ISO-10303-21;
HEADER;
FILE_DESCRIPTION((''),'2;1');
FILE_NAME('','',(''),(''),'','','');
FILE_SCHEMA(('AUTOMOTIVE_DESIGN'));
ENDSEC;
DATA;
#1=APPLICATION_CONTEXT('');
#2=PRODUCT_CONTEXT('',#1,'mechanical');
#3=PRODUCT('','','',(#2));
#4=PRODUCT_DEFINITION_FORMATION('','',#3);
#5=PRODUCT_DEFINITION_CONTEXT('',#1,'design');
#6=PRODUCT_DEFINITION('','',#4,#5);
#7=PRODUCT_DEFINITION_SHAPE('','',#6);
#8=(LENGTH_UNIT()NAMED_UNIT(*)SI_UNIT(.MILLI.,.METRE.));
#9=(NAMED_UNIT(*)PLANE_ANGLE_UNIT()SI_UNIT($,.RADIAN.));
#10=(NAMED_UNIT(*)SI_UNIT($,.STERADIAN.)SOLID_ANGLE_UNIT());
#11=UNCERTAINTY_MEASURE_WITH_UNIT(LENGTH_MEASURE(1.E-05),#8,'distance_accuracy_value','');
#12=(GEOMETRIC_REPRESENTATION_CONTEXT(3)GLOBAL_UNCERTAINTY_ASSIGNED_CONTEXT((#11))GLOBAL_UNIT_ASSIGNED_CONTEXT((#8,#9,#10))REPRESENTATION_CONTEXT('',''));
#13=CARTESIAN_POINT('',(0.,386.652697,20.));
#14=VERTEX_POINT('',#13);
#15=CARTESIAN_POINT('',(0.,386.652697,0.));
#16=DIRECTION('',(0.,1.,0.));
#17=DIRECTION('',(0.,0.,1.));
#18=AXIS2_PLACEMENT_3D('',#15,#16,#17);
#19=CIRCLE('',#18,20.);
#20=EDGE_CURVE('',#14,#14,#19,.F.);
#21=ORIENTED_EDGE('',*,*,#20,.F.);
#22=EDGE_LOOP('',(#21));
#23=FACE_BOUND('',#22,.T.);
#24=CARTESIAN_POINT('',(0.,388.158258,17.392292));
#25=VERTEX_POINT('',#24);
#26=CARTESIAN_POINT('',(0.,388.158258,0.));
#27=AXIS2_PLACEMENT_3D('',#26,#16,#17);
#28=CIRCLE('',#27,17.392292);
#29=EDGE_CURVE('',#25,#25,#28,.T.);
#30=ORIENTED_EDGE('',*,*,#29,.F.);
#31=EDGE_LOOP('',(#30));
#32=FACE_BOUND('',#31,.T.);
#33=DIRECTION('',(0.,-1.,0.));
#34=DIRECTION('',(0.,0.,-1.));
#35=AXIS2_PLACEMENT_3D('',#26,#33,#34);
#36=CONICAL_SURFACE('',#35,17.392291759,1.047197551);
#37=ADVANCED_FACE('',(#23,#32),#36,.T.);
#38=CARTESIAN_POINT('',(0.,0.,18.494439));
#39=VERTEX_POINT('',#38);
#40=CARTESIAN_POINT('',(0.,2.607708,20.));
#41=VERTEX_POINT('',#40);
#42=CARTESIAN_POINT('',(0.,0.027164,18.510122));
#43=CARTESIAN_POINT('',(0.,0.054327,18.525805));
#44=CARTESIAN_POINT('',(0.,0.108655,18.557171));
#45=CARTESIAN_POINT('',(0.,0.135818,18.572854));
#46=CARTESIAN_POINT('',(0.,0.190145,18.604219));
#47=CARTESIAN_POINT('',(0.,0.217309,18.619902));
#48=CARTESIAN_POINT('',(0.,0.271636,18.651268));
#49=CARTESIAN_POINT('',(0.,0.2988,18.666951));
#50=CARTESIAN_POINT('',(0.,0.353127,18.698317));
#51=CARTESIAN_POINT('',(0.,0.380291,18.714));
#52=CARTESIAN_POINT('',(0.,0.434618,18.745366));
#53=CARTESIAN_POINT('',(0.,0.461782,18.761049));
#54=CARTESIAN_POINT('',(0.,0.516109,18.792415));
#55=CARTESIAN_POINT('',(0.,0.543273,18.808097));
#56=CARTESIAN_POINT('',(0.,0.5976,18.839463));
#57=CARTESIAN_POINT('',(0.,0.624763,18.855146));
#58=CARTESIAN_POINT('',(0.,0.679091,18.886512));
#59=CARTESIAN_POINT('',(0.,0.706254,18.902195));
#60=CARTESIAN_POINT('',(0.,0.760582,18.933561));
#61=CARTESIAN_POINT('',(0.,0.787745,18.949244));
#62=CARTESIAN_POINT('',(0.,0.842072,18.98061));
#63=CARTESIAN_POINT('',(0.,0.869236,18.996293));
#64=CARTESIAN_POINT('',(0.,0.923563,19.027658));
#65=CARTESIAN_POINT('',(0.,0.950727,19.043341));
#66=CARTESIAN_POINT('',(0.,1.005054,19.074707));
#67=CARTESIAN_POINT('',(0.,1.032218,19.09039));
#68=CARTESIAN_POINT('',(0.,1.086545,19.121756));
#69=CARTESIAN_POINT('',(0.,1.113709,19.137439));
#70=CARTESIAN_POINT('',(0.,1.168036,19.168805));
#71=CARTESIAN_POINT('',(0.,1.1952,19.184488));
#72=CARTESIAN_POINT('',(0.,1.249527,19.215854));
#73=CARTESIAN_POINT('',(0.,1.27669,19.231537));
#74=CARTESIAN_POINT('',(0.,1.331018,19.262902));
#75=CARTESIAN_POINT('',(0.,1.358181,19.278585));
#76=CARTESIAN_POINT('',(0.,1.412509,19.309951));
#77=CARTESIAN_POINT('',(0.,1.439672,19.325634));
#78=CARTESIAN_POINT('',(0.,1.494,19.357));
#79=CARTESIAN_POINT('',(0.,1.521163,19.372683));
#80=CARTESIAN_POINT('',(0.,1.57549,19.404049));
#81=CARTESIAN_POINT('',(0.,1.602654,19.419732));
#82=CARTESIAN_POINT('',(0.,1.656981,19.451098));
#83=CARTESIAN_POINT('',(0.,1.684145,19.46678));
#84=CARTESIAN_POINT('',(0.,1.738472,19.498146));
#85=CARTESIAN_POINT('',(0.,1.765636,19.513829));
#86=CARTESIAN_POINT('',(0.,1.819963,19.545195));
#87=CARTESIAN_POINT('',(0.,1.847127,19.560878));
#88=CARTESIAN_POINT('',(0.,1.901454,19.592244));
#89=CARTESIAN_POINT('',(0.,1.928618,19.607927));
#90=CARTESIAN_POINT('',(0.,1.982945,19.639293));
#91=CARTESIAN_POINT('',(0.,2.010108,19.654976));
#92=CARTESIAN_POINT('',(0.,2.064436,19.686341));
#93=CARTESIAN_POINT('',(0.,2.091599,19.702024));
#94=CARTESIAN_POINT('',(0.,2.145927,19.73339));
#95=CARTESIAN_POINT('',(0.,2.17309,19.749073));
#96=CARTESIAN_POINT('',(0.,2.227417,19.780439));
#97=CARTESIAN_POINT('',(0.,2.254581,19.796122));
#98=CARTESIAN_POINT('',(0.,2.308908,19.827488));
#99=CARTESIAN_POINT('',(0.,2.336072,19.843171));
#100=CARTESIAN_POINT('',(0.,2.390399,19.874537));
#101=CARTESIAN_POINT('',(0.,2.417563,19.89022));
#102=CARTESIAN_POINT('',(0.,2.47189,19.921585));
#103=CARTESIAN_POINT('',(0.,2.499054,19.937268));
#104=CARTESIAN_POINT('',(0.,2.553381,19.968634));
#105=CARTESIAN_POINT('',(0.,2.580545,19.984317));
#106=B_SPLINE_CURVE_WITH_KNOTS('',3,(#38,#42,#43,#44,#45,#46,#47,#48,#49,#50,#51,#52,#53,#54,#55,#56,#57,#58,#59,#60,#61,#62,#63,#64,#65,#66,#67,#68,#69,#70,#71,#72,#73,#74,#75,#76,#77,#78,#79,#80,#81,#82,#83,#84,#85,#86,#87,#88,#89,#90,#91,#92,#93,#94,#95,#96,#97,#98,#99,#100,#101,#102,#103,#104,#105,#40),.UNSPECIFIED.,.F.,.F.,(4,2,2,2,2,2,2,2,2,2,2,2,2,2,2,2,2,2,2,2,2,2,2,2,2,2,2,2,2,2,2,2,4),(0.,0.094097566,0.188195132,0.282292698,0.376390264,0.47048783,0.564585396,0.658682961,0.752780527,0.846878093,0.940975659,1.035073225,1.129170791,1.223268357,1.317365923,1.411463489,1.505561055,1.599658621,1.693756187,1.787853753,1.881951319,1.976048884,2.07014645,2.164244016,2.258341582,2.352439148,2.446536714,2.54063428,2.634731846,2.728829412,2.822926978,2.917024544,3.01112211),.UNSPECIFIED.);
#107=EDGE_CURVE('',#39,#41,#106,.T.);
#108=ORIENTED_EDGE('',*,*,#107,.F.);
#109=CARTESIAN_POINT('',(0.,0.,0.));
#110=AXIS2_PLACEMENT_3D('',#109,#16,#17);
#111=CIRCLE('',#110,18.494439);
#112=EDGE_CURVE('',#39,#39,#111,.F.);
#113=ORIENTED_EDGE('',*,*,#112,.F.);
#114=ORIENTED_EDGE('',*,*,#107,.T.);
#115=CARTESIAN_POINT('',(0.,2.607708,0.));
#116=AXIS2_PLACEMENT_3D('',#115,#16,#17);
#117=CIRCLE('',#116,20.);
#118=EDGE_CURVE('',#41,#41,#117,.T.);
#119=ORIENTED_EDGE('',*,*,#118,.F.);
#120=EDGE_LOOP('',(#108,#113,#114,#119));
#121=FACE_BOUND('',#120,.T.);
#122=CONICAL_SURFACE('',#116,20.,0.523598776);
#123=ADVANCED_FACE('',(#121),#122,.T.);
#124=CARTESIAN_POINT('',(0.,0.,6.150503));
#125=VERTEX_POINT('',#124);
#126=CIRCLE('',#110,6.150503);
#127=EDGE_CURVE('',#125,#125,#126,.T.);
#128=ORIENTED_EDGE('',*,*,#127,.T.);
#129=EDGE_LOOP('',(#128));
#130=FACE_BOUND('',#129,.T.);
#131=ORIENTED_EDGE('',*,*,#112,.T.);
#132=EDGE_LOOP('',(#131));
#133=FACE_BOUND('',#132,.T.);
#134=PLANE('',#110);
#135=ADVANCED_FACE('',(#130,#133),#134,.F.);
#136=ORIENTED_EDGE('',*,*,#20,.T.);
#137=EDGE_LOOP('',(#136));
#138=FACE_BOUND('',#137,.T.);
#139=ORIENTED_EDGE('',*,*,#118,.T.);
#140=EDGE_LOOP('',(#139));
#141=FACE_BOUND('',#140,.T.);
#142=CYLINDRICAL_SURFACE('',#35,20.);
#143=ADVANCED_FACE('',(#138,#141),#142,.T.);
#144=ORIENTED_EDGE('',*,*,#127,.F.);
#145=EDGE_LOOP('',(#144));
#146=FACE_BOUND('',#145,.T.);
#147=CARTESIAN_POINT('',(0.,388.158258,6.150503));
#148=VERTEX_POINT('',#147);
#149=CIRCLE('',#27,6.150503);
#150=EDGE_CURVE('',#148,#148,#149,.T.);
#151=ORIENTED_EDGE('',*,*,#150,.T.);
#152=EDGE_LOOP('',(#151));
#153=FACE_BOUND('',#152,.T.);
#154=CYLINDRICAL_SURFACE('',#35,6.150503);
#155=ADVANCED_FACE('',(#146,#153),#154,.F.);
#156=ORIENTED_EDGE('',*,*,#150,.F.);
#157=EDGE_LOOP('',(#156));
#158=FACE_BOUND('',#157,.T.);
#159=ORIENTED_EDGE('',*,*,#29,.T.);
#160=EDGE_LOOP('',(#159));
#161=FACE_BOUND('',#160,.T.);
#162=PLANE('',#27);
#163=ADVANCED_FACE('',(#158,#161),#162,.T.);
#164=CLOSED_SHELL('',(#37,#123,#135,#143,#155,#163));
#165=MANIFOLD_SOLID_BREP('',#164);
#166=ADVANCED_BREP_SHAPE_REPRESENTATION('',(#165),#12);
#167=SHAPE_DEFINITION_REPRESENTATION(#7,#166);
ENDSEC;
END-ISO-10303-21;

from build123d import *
from OCP.BRepFilletAPI import BRepFilletAPI_MakeChamfer

# Parameters (mm, degrees)
SKETCH1_R           = 20
BOSS_EXTRUDE1_DEPTH = 388.158257928
SKETCH2_R           = 6.150503184
CUT_EXTRUDE1_DEPTH  = 390.187401129
CHAMFER1_SIZE       = 1.505561055
CHAMFER1_SIZE2      = 2.607708241


with BuildPart() as part:
    # Sketch1 → Boss-Extrude1 (new body)
    with BuildSketch(Plane(origin=(0, 0, 0), x_dir=(1, 0, 0), z_dir=(0, 1, 0))):
        Circle(SKETCH1_R)
    extrude(amount=BOSS_EXTRUDE1_DEPTH)

    # Sketch2 → Cut-Extrude1 (cut, through all)
    with BuildSketch(Plane(origin=(0, 0, 0), x_dir=(1, 0, 0), z_dir=(0, 1, 0))):
        Circle(SKETCH2_R)
    extrude(amount=CUT_EXTRUDE1_DEPTH, mode=Mode.SUBTRACT)

    # Chamfer1: one chamfer whose edges measure the first distance from different faces: ONE call of the kernel's chamfer builder (chamfer() names one face for all edges)
    chamfer1_edges_1 = [part.edges().sort_by_distance(p)[0] for p in [
        (-20, 388.158257928, 0),
    ]]
    chamfer1_side_1 = [part.faces().sort_by_distance(p)[0] for p in [
        (-20, 194.079128964, 0),
    ]]
    chamfer1_edges_2 = [part.edges().sort_by_distance(p)[0] for p in [
        (-20, 0, 0),
    ]]
    chamfer1_side_2 = [part.faces().sort_by_distance(p)[0] for p in [
        (-19.434314575, 0, 0),
    ]]
    chamfer1 = BRepFilletAPI_MakeChamfer(part.part.solid().wrapped)
    for e in chamfer1_edges_1:
        chamfer1.Add(CHAMFER1_SIZE, CHAMFER1_SIZE2, e.wrapped, chamfer1_side_1[0].wrapped)  # the first distance lies on this face
    for e in chamfer1_edges_2:
        chamfer1.Add(CHAMFER1_SIZE, CHAMFER1_SIZE2, e.wrapped, chamfer1_side_2[0].wrapped)  # the first distance lies on this face
    add(Compound.cast(chamfer1.Shape()), mode=Mode.REPLACE)


solid = part.part
